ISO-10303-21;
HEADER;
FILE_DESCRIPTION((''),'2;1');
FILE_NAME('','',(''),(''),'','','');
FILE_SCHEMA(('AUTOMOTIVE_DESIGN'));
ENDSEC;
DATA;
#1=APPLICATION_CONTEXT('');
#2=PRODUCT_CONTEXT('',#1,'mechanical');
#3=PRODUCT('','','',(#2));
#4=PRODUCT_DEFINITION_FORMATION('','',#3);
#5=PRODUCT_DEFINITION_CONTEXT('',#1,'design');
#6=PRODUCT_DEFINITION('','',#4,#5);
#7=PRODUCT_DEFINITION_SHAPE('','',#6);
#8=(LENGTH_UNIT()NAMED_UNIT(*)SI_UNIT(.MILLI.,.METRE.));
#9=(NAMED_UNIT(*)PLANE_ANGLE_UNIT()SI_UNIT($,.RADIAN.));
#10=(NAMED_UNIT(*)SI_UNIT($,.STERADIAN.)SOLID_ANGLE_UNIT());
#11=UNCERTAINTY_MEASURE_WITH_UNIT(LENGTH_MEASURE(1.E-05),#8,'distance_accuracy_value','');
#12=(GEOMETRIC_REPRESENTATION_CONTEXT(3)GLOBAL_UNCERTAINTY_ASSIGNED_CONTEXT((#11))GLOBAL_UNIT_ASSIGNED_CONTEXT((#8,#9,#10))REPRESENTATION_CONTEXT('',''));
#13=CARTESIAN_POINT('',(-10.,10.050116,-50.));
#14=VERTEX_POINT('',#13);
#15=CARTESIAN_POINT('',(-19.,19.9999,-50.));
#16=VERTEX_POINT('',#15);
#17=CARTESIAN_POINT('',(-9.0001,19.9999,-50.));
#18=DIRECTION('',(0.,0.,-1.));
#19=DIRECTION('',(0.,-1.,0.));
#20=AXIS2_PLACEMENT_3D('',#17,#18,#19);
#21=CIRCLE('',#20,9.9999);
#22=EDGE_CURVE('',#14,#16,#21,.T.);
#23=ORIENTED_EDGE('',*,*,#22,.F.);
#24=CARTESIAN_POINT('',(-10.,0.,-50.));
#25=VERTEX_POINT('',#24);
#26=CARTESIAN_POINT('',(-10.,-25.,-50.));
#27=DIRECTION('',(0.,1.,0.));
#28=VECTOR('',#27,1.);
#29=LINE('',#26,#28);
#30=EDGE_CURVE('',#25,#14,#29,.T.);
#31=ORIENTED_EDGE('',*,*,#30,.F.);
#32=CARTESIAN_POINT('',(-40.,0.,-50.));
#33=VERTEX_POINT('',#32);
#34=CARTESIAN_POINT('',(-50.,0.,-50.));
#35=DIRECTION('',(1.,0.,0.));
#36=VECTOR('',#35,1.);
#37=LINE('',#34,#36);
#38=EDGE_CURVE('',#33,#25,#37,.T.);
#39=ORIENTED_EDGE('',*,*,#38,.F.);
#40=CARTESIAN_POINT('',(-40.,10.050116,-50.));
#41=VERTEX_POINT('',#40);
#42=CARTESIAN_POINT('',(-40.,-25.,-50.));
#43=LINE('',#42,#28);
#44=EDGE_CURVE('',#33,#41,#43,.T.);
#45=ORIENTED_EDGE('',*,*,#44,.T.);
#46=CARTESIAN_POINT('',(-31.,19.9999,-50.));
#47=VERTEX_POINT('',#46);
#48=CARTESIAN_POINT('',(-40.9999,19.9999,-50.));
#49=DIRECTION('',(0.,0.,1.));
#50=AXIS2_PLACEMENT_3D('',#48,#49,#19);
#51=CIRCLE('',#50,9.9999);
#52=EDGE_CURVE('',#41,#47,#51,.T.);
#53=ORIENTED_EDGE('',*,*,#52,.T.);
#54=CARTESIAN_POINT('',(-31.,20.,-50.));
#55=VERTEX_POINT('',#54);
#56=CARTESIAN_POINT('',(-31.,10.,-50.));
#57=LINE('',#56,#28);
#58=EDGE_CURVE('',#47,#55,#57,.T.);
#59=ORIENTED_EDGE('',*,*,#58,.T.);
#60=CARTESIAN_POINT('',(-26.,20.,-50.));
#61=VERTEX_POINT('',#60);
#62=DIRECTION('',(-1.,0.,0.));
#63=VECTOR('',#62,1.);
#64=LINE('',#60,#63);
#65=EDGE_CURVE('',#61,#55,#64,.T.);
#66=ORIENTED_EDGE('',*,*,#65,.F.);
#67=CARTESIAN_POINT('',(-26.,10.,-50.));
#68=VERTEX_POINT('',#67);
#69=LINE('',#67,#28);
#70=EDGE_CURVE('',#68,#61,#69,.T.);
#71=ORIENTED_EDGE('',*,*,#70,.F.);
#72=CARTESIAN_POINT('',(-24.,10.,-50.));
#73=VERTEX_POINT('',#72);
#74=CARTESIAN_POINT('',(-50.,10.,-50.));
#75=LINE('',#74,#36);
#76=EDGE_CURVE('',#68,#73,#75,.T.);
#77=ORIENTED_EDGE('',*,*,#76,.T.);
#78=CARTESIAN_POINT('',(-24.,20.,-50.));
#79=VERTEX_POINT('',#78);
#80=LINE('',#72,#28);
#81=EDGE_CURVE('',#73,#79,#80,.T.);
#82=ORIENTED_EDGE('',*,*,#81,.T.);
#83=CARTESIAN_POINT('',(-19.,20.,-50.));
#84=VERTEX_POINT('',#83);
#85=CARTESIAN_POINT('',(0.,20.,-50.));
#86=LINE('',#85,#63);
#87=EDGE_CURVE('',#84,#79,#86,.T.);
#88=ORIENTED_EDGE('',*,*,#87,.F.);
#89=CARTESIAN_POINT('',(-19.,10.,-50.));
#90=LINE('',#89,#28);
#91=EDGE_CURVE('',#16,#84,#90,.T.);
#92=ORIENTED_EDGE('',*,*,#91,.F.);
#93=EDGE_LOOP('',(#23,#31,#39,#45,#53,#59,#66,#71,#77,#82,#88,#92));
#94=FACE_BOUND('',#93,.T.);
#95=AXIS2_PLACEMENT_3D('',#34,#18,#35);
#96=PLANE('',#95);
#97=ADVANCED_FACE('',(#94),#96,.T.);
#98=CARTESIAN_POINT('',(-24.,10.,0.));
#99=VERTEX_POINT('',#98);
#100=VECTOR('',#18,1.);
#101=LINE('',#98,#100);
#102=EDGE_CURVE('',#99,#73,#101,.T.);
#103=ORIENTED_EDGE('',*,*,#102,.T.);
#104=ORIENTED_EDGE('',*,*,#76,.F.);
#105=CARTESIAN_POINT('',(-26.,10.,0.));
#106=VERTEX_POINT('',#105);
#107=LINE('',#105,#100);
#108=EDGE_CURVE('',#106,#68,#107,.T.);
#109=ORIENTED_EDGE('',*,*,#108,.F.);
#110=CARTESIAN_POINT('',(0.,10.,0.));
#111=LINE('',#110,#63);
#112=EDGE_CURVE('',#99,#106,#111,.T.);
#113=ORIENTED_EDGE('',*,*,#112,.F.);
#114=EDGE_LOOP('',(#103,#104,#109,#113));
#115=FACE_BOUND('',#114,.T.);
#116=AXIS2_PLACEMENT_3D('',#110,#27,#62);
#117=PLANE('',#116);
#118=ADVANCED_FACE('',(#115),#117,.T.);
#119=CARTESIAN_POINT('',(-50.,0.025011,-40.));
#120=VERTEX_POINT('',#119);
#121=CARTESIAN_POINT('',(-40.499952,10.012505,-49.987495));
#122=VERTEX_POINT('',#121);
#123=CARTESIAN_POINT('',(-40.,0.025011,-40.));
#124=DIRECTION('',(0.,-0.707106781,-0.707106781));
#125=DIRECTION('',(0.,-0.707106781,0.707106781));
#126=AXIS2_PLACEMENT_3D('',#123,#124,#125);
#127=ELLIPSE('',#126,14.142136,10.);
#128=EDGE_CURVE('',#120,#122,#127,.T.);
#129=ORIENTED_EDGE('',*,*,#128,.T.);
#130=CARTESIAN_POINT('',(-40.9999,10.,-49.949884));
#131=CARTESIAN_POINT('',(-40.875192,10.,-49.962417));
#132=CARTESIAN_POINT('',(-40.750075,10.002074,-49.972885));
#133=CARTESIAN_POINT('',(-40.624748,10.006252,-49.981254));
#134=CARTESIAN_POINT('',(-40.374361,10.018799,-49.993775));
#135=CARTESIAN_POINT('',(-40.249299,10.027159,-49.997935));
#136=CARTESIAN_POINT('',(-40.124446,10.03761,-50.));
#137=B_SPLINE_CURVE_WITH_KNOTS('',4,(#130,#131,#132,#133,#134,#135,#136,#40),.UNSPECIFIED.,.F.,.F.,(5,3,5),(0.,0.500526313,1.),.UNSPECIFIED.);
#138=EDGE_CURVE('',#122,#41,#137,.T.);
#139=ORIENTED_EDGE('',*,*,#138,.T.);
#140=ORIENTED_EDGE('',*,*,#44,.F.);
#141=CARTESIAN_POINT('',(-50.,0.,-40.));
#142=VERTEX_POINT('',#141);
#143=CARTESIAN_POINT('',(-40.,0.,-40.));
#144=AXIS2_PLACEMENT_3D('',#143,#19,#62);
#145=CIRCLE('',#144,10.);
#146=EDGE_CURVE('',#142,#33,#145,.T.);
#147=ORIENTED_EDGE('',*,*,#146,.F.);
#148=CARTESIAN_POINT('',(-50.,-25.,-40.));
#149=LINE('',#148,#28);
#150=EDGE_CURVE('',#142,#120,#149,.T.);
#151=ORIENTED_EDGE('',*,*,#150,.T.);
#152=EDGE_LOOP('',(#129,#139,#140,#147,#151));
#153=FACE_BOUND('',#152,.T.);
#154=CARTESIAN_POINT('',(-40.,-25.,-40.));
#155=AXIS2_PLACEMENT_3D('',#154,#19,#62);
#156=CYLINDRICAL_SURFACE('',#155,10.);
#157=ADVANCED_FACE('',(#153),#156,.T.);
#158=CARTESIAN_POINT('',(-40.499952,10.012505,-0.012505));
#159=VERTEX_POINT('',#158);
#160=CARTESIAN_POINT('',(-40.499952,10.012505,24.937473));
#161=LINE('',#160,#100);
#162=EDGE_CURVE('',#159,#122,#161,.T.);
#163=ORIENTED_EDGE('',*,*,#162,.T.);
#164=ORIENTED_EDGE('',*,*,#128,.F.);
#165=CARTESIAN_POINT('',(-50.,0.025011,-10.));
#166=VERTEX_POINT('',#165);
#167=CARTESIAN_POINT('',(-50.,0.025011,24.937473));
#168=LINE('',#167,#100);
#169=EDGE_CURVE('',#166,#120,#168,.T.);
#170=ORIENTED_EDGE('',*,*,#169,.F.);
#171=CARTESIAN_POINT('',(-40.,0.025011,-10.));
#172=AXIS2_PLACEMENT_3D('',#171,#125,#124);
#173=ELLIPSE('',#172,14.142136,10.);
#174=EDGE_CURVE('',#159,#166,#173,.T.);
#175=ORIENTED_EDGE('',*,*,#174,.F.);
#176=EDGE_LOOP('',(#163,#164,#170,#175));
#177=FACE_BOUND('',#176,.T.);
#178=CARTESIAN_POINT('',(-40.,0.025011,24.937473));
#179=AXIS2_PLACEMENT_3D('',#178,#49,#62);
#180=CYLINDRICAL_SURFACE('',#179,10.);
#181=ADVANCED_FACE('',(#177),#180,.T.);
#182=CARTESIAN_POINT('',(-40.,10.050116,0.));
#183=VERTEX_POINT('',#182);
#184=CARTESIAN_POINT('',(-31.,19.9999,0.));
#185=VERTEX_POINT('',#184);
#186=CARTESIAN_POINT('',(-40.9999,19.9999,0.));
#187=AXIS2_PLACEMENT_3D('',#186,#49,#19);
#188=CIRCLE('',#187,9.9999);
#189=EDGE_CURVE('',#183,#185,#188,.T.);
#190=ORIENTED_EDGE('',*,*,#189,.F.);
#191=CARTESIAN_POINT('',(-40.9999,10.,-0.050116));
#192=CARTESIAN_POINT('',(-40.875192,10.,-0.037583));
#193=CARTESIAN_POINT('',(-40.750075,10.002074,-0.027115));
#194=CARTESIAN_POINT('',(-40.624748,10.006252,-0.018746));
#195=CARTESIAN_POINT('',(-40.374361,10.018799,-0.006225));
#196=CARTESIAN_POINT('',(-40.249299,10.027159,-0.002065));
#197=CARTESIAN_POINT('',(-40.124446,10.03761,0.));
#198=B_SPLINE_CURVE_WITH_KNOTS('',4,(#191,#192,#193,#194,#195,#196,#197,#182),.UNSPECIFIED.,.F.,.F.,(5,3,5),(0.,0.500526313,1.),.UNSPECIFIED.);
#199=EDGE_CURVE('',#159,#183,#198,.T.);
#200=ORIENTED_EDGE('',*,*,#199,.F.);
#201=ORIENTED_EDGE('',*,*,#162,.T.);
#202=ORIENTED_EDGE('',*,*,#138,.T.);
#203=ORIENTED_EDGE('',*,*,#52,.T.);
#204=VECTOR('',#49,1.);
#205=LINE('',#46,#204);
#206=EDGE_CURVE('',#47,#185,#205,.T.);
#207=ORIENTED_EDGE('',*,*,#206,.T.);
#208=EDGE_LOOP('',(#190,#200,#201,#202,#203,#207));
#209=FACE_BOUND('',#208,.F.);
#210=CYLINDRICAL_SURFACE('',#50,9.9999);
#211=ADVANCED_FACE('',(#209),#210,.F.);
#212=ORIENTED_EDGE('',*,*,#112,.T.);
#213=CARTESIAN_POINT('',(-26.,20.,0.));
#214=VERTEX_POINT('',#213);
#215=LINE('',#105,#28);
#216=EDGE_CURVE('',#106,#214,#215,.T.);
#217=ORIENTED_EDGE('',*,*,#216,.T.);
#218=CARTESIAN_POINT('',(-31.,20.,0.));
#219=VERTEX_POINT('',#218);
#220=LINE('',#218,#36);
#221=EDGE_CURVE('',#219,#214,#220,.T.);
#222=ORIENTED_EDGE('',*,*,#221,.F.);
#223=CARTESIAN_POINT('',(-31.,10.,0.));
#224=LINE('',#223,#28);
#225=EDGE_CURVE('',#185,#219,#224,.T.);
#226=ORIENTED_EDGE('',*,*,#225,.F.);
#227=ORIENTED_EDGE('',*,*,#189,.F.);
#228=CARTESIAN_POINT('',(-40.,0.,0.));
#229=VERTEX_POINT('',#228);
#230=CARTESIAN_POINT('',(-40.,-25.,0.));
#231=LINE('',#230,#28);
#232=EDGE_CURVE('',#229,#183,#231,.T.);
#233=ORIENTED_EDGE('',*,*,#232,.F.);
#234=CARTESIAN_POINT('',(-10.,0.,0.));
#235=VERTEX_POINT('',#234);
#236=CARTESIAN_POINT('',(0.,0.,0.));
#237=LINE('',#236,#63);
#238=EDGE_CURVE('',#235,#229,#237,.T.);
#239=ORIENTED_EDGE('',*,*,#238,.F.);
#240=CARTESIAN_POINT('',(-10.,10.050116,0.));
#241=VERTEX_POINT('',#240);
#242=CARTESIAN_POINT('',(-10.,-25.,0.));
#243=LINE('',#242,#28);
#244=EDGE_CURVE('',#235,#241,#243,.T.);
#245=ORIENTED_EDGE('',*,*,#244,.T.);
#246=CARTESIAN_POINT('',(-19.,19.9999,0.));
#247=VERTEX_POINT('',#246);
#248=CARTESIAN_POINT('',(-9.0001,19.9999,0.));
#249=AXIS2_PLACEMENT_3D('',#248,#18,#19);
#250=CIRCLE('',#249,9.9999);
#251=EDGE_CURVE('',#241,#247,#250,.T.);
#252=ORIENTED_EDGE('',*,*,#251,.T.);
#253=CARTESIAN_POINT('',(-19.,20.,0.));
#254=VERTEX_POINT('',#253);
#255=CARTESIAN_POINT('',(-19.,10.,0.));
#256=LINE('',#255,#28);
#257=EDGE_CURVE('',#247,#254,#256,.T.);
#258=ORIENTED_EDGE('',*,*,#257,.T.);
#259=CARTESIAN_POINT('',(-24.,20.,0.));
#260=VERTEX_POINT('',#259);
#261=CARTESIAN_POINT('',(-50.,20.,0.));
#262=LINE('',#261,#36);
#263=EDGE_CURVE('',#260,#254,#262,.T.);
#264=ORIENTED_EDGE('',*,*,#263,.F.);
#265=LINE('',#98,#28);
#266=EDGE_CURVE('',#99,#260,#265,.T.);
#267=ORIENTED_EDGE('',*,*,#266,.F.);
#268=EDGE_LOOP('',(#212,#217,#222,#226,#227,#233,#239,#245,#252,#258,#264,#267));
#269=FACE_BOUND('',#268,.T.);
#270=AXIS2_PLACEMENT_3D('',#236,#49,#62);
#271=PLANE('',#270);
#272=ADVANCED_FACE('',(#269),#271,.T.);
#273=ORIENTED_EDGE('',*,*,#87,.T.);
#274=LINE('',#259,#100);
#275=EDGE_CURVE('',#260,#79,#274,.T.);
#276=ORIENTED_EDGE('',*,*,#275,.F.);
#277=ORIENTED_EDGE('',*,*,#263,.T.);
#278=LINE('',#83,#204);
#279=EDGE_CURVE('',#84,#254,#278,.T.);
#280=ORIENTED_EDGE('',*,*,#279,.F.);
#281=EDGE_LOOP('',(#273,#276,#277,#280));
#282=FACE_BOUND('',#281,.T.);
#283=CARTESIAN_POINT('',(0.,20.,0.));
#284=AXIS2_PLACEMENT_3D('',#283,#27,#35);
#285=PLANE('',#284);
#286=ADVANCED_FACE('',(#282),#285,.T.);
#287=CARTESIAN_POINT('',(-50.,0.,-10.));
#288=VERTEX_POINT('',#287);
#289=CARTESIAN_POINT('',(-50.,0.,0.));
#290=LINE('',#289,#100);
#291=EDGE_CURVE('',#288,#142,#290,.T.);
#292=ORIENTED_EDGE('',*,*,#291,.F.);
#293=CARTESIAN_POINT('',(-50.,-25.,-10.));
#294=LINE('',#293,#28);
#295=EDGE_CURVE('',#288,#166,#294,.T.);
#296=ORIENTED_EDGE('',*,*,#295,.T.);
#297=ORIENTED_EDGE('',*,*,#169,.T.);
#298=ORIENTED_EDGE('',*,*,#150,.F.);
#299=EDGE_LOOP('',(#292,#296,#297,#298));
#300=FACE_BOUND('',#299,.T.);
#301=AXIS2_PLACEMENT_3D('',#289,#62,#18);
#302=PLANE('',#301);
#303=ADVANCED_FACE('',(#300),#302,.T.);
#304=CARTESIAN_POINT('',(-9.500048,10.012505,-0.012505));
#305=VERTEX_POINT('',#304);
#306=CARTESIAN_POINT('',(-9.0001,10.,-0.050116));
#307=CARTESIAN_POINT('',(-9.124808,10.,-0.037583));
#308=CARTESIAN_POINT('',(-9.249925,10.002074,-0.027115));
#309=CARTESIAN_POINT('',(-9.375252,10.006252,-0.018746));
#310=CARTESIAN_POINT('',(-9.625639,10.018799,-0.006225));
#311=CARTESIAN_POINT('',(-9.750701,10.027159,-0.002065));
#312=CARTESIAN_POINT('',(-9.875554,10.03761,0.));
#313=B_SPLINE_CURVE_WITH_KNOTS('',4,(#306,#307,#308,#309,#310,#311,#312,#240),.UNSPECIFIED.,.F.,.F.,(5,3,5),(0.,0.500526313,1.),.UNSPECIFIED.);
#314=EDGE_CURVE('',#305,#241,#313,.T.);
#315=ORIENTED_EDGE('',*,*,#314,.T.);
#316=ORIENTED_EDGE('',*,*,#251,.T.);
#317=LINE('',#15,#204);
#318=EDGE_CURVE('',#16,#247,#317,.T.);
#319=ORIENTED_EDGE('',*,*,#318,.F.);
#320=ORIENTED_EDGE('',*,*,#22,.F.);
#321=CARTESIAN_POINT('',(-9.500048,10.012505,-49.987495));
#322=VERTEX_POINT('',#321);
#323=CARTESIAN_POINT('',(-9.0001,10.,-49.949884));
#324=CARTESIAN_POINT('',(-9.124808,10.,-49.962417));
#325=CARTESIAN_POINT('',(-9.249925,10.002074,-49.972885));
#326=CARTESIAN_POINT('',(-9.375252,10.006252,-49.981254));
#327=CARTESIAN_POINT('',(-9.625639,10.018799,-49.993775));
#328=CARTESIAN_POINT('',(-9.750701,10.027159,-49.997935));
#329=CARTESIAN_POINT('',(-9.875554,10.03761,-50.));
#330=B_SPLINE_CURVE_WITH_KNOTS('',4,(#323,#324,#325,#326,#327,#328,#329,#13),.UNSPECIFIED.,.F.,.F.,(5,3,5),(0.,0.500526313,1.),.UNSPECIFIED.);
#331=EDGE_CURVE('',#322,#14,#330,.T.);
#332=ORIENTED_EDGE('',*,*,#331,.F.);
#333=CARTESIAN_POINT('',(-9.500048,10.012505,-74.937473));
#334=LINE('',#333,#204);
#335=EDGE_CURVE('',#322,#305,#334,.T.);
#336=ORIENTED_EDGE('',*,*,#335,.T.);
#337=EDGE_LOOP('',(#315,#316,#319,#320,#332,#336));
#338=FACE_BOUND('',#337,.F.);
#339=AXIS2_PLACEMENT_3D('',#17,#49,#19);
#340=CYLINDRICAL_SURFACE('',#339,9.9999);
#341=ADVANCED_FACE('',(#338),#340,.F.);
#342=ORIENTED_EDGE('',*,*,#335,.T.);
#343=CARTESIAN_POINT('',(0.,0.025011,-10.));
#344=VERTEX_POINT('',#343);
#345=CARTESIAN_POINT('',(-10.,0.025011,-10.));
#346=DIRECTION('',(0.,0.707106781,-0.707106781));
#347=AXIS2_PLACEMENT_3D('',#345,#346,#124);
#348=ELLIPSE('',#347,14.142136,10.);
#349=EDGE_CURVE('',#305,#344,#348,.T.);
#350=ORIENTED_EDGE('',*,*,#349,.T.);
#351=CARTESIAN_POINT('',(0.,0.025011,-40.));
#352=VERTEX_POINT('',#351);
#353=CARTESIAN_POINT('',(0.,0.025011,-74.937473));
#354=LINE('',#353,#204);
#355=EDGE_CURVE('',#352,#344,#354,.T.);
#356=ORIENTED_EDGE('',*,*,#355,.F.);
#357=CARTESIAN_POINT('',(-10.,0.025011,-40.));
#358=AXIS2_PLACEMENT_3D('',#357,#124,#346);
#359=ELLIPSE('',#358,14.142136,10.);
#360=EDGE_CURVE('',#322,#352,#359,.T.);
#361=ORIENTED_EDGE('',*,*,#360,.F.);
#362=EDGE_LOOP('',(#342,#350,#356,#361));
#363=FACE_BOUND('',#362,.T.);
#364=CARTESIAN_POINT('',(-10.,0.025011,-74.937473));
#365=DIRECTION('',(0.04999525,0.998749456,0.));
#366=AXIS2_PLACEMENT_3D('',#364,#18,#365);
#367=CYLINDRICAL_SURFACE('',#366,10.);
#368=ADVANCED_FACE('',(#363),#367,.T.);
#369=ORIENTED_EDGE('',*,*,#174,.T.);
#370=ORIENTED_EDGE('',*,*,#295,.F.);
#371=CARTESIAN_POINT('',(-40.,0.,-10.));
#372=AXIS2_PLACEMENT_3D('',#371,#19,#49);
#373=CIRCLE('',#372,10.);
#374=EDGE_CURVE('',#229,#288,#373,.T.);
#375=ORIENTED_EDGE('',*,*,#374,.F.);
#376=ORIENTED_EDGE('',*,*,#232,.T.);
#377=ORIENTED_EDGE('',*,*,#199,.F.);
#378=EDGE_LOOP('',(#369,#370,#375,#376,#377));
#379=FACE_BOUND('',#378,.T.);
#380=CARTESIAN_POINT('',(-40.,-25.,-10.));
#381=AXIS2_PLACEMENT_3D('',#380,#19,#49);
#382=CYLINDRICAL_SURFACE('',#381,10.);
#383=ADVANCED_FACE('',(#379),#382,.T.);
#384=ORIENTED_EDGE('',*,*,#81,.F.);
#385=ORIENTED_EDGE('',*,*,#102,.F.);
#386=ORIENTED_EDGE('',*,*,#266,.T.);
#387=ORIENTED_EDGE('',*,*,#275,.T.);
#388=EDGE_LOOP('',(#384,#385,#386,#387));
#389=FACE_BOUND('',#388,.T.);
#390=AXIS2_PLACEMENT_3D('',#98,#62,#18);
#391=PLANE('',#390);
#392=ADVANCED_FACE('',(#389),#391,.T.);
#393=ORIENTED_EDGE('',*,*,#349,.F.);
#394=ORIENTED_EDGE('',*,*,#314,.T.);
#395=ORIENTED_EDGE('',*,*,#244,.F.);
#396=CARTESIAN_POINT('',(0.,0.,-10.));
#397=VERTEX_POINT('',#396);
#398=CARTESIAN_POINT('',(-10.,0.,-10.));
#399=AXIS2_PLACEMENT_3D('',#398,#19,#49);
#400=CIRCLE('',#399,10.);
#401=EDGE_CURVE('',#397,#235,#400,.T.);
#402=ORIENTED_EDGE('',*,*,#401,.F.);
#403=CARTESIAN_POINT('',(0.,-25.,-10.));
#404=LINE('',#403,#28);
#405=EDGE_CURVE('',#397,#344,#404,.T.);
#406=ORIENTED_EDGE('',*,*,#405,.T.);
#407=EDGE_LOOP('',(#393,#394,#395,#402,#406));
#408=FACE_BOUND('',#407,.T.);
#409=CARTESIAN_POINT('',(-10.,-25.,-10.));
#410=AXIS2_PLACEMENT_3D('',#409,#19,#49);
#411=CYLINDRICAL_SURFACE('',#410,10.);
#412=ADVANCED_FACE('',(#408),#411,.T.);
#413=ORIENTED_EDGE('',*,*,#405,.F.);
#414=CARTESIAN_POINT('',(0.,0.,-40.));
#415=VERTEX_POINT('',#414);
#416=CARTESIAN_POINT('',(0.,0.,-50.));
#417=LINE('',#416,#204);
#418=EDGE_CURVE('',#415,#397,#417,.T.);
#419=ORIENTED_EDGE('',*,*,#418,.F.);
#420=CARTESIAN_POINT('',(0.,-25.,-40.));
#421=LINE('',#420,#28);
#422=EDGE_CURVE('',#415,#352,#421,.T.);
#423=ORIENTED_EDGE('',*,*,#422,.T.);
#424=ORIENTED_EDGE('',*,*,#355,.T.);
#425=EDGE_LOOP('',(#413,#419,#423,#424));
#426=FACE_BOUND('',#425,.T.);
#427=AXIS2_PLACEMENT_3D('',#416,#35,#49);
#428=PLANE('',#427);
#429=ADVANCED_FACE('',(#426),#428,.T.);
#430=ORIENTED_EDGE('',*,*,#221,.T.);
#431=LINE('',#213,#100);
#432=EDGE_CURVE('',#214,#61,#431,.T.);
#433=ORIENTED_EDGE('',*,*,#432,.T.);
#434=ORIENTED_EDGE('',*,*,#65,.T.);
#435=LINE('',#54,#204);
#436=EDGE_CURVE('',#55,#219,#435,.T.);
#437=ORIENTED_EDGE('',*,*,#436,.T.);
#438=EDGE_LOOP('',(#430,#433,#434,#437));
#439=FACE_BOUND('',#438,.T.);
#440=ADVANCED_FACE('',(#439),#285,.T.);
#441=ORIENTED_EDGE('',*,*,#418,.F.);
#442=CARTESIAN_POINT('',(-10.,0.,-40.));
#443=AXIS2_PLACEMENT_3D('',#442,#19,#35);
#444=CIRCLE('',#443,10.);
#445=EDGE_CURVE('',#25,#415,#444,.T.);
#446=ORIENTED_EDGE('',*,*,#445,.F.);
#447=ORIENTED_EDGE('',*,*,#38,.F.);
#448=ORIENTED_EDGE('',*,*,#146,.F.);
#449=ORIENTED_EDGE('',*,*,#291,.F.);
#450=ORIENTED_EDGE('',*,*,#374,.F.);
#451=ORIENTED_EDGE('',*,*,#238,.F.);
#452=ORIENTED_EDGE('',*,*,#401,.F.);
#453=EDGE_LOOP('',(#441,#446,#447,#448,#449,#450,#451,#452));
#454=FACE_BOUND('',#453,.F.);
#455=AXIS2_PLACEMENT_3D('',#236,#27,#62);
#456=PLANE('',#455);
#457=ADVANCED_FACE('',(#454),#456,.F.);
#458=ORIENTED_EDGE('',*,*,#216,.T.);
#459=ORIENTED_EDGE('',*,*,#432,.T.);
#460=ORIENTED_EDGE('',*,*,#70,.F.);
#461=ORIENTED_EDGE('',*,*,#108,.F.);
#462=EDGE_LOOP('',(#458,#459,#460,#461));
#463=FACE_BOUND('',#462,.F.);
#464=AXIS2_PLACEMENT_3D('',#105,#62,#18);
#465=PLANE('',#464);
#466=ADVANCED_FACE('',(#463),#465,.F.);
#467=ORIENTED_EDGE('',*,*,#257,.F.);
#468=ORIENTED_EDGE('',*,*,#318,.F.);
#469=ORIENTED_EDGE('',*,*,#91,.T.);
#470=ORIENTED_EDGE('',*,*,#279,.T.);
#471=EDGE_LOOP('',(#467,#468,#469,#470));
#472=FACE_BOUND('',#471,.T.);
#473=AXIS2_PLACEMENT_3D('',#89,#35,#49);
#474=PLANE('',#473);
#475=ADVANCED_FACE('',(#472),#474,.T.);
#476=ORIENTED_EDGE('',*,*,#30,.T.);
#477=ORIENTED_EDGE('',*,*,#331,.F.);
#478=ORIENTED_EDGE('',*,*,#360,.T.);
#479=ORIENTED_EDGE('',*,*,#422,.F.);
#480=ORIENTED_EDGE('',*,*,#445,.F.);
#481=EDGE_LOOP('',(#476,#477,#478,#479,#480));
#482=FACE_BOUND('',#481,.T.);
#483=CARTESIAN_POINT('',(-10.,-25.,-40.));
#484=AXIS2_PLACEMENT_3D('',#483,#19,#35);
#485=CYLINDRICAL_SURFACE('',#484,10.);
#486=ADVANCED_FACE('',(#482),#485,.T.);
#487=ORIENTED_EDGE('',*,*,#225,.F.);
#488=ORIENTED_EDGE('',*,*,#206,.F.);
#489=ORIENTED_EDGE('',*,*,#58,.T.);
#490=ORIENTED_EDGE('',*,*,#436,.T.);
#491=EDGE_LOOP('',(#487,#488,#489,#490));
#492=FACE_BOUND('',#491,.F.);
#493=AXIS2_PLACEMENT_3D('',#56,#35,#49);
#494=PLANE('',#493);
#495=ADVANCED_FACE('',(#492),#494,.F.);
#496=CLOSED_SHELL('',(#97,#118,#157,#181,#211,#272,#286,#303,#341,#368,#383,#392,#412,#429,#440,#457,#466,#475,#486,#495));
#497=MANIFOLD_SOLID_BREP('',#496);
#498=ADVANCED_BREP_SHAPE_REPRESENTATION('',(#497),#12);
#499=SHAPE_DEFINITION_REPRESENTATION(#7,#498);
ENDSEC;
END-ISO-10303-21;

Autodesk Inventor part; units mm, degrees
ref_plane "YZ Plane" through (0, 0, 0) normal (1, 0, 0) x (0, 1, 0)
ref_plane "XZ Plane" through (0, 0, 0) normal (0, 1, 0) x (-1, 0, 0)
ref_plane "XY Plane" through (0, 0, 0) normal (0, 0, 1) x (1, 0, 0)
sketch "Sketch1" plane through (0, 0, 0) normal (0, 1, 0) x (-1, 0, 0)
  line L0 (0, 0) -> (50, 0)
  line L1 (50, 0) -> (50, -50)
  line L2 (50, -50) -> (0, -50)
  line L3 (0, -50) -> (0, 0)
  dimension "d0" = 50
  dimension "d1" = 50
extrude "Extrusion1" add sketch "Sketch1" along normal blind 10
sketch "Sketch2" plane through (0, 10, 0) normal (0, 1, 0) x (1, 0, 0)
  line L0 (-31, 0) -> (-26, 0)
  line L1 (-26, 0) -> (-26, 50)
  line L2 (-26, 50) -> (-31, 50)
  line L3 (-31, 50) -> (-31, 0)
  line L4 (-50, 0) -> (0, 0) projected
  line L5 (0, 50) -> (-50, 50) projected
  line L6 (-19, 0) -> (-24, 0)
  line L7 (-24, 0) -> (-24, 50)
  line L8 (-24, 50) -> (-19, 50)
  line L9 (-19, 50) -> (-19, 0)
  line L10 (0, 0) -> (0, 50) projected
  dimension "d7" = 5
  dimension "d8" = 5
  dimension "d9" = 2
  dimension "d10" = 19
extrude "Extrusion2" add sketch "Sketch2" along normal blind 10 contours L3 L2 L1 L0 | L7 L5 L9 L4
fillet "Fillet1" radius 10 2 edges at (-19, 10, -25) (-31, 10, -25)
fillet "Fillet2" radius 10 6 edges at (0, 10, -25) (0, 5, -50) (-50, 5, -50) (-50, 5, 0) (0, 5, 0) (-50, 10, -25)
properties part number "CalibrationWallMounts"
